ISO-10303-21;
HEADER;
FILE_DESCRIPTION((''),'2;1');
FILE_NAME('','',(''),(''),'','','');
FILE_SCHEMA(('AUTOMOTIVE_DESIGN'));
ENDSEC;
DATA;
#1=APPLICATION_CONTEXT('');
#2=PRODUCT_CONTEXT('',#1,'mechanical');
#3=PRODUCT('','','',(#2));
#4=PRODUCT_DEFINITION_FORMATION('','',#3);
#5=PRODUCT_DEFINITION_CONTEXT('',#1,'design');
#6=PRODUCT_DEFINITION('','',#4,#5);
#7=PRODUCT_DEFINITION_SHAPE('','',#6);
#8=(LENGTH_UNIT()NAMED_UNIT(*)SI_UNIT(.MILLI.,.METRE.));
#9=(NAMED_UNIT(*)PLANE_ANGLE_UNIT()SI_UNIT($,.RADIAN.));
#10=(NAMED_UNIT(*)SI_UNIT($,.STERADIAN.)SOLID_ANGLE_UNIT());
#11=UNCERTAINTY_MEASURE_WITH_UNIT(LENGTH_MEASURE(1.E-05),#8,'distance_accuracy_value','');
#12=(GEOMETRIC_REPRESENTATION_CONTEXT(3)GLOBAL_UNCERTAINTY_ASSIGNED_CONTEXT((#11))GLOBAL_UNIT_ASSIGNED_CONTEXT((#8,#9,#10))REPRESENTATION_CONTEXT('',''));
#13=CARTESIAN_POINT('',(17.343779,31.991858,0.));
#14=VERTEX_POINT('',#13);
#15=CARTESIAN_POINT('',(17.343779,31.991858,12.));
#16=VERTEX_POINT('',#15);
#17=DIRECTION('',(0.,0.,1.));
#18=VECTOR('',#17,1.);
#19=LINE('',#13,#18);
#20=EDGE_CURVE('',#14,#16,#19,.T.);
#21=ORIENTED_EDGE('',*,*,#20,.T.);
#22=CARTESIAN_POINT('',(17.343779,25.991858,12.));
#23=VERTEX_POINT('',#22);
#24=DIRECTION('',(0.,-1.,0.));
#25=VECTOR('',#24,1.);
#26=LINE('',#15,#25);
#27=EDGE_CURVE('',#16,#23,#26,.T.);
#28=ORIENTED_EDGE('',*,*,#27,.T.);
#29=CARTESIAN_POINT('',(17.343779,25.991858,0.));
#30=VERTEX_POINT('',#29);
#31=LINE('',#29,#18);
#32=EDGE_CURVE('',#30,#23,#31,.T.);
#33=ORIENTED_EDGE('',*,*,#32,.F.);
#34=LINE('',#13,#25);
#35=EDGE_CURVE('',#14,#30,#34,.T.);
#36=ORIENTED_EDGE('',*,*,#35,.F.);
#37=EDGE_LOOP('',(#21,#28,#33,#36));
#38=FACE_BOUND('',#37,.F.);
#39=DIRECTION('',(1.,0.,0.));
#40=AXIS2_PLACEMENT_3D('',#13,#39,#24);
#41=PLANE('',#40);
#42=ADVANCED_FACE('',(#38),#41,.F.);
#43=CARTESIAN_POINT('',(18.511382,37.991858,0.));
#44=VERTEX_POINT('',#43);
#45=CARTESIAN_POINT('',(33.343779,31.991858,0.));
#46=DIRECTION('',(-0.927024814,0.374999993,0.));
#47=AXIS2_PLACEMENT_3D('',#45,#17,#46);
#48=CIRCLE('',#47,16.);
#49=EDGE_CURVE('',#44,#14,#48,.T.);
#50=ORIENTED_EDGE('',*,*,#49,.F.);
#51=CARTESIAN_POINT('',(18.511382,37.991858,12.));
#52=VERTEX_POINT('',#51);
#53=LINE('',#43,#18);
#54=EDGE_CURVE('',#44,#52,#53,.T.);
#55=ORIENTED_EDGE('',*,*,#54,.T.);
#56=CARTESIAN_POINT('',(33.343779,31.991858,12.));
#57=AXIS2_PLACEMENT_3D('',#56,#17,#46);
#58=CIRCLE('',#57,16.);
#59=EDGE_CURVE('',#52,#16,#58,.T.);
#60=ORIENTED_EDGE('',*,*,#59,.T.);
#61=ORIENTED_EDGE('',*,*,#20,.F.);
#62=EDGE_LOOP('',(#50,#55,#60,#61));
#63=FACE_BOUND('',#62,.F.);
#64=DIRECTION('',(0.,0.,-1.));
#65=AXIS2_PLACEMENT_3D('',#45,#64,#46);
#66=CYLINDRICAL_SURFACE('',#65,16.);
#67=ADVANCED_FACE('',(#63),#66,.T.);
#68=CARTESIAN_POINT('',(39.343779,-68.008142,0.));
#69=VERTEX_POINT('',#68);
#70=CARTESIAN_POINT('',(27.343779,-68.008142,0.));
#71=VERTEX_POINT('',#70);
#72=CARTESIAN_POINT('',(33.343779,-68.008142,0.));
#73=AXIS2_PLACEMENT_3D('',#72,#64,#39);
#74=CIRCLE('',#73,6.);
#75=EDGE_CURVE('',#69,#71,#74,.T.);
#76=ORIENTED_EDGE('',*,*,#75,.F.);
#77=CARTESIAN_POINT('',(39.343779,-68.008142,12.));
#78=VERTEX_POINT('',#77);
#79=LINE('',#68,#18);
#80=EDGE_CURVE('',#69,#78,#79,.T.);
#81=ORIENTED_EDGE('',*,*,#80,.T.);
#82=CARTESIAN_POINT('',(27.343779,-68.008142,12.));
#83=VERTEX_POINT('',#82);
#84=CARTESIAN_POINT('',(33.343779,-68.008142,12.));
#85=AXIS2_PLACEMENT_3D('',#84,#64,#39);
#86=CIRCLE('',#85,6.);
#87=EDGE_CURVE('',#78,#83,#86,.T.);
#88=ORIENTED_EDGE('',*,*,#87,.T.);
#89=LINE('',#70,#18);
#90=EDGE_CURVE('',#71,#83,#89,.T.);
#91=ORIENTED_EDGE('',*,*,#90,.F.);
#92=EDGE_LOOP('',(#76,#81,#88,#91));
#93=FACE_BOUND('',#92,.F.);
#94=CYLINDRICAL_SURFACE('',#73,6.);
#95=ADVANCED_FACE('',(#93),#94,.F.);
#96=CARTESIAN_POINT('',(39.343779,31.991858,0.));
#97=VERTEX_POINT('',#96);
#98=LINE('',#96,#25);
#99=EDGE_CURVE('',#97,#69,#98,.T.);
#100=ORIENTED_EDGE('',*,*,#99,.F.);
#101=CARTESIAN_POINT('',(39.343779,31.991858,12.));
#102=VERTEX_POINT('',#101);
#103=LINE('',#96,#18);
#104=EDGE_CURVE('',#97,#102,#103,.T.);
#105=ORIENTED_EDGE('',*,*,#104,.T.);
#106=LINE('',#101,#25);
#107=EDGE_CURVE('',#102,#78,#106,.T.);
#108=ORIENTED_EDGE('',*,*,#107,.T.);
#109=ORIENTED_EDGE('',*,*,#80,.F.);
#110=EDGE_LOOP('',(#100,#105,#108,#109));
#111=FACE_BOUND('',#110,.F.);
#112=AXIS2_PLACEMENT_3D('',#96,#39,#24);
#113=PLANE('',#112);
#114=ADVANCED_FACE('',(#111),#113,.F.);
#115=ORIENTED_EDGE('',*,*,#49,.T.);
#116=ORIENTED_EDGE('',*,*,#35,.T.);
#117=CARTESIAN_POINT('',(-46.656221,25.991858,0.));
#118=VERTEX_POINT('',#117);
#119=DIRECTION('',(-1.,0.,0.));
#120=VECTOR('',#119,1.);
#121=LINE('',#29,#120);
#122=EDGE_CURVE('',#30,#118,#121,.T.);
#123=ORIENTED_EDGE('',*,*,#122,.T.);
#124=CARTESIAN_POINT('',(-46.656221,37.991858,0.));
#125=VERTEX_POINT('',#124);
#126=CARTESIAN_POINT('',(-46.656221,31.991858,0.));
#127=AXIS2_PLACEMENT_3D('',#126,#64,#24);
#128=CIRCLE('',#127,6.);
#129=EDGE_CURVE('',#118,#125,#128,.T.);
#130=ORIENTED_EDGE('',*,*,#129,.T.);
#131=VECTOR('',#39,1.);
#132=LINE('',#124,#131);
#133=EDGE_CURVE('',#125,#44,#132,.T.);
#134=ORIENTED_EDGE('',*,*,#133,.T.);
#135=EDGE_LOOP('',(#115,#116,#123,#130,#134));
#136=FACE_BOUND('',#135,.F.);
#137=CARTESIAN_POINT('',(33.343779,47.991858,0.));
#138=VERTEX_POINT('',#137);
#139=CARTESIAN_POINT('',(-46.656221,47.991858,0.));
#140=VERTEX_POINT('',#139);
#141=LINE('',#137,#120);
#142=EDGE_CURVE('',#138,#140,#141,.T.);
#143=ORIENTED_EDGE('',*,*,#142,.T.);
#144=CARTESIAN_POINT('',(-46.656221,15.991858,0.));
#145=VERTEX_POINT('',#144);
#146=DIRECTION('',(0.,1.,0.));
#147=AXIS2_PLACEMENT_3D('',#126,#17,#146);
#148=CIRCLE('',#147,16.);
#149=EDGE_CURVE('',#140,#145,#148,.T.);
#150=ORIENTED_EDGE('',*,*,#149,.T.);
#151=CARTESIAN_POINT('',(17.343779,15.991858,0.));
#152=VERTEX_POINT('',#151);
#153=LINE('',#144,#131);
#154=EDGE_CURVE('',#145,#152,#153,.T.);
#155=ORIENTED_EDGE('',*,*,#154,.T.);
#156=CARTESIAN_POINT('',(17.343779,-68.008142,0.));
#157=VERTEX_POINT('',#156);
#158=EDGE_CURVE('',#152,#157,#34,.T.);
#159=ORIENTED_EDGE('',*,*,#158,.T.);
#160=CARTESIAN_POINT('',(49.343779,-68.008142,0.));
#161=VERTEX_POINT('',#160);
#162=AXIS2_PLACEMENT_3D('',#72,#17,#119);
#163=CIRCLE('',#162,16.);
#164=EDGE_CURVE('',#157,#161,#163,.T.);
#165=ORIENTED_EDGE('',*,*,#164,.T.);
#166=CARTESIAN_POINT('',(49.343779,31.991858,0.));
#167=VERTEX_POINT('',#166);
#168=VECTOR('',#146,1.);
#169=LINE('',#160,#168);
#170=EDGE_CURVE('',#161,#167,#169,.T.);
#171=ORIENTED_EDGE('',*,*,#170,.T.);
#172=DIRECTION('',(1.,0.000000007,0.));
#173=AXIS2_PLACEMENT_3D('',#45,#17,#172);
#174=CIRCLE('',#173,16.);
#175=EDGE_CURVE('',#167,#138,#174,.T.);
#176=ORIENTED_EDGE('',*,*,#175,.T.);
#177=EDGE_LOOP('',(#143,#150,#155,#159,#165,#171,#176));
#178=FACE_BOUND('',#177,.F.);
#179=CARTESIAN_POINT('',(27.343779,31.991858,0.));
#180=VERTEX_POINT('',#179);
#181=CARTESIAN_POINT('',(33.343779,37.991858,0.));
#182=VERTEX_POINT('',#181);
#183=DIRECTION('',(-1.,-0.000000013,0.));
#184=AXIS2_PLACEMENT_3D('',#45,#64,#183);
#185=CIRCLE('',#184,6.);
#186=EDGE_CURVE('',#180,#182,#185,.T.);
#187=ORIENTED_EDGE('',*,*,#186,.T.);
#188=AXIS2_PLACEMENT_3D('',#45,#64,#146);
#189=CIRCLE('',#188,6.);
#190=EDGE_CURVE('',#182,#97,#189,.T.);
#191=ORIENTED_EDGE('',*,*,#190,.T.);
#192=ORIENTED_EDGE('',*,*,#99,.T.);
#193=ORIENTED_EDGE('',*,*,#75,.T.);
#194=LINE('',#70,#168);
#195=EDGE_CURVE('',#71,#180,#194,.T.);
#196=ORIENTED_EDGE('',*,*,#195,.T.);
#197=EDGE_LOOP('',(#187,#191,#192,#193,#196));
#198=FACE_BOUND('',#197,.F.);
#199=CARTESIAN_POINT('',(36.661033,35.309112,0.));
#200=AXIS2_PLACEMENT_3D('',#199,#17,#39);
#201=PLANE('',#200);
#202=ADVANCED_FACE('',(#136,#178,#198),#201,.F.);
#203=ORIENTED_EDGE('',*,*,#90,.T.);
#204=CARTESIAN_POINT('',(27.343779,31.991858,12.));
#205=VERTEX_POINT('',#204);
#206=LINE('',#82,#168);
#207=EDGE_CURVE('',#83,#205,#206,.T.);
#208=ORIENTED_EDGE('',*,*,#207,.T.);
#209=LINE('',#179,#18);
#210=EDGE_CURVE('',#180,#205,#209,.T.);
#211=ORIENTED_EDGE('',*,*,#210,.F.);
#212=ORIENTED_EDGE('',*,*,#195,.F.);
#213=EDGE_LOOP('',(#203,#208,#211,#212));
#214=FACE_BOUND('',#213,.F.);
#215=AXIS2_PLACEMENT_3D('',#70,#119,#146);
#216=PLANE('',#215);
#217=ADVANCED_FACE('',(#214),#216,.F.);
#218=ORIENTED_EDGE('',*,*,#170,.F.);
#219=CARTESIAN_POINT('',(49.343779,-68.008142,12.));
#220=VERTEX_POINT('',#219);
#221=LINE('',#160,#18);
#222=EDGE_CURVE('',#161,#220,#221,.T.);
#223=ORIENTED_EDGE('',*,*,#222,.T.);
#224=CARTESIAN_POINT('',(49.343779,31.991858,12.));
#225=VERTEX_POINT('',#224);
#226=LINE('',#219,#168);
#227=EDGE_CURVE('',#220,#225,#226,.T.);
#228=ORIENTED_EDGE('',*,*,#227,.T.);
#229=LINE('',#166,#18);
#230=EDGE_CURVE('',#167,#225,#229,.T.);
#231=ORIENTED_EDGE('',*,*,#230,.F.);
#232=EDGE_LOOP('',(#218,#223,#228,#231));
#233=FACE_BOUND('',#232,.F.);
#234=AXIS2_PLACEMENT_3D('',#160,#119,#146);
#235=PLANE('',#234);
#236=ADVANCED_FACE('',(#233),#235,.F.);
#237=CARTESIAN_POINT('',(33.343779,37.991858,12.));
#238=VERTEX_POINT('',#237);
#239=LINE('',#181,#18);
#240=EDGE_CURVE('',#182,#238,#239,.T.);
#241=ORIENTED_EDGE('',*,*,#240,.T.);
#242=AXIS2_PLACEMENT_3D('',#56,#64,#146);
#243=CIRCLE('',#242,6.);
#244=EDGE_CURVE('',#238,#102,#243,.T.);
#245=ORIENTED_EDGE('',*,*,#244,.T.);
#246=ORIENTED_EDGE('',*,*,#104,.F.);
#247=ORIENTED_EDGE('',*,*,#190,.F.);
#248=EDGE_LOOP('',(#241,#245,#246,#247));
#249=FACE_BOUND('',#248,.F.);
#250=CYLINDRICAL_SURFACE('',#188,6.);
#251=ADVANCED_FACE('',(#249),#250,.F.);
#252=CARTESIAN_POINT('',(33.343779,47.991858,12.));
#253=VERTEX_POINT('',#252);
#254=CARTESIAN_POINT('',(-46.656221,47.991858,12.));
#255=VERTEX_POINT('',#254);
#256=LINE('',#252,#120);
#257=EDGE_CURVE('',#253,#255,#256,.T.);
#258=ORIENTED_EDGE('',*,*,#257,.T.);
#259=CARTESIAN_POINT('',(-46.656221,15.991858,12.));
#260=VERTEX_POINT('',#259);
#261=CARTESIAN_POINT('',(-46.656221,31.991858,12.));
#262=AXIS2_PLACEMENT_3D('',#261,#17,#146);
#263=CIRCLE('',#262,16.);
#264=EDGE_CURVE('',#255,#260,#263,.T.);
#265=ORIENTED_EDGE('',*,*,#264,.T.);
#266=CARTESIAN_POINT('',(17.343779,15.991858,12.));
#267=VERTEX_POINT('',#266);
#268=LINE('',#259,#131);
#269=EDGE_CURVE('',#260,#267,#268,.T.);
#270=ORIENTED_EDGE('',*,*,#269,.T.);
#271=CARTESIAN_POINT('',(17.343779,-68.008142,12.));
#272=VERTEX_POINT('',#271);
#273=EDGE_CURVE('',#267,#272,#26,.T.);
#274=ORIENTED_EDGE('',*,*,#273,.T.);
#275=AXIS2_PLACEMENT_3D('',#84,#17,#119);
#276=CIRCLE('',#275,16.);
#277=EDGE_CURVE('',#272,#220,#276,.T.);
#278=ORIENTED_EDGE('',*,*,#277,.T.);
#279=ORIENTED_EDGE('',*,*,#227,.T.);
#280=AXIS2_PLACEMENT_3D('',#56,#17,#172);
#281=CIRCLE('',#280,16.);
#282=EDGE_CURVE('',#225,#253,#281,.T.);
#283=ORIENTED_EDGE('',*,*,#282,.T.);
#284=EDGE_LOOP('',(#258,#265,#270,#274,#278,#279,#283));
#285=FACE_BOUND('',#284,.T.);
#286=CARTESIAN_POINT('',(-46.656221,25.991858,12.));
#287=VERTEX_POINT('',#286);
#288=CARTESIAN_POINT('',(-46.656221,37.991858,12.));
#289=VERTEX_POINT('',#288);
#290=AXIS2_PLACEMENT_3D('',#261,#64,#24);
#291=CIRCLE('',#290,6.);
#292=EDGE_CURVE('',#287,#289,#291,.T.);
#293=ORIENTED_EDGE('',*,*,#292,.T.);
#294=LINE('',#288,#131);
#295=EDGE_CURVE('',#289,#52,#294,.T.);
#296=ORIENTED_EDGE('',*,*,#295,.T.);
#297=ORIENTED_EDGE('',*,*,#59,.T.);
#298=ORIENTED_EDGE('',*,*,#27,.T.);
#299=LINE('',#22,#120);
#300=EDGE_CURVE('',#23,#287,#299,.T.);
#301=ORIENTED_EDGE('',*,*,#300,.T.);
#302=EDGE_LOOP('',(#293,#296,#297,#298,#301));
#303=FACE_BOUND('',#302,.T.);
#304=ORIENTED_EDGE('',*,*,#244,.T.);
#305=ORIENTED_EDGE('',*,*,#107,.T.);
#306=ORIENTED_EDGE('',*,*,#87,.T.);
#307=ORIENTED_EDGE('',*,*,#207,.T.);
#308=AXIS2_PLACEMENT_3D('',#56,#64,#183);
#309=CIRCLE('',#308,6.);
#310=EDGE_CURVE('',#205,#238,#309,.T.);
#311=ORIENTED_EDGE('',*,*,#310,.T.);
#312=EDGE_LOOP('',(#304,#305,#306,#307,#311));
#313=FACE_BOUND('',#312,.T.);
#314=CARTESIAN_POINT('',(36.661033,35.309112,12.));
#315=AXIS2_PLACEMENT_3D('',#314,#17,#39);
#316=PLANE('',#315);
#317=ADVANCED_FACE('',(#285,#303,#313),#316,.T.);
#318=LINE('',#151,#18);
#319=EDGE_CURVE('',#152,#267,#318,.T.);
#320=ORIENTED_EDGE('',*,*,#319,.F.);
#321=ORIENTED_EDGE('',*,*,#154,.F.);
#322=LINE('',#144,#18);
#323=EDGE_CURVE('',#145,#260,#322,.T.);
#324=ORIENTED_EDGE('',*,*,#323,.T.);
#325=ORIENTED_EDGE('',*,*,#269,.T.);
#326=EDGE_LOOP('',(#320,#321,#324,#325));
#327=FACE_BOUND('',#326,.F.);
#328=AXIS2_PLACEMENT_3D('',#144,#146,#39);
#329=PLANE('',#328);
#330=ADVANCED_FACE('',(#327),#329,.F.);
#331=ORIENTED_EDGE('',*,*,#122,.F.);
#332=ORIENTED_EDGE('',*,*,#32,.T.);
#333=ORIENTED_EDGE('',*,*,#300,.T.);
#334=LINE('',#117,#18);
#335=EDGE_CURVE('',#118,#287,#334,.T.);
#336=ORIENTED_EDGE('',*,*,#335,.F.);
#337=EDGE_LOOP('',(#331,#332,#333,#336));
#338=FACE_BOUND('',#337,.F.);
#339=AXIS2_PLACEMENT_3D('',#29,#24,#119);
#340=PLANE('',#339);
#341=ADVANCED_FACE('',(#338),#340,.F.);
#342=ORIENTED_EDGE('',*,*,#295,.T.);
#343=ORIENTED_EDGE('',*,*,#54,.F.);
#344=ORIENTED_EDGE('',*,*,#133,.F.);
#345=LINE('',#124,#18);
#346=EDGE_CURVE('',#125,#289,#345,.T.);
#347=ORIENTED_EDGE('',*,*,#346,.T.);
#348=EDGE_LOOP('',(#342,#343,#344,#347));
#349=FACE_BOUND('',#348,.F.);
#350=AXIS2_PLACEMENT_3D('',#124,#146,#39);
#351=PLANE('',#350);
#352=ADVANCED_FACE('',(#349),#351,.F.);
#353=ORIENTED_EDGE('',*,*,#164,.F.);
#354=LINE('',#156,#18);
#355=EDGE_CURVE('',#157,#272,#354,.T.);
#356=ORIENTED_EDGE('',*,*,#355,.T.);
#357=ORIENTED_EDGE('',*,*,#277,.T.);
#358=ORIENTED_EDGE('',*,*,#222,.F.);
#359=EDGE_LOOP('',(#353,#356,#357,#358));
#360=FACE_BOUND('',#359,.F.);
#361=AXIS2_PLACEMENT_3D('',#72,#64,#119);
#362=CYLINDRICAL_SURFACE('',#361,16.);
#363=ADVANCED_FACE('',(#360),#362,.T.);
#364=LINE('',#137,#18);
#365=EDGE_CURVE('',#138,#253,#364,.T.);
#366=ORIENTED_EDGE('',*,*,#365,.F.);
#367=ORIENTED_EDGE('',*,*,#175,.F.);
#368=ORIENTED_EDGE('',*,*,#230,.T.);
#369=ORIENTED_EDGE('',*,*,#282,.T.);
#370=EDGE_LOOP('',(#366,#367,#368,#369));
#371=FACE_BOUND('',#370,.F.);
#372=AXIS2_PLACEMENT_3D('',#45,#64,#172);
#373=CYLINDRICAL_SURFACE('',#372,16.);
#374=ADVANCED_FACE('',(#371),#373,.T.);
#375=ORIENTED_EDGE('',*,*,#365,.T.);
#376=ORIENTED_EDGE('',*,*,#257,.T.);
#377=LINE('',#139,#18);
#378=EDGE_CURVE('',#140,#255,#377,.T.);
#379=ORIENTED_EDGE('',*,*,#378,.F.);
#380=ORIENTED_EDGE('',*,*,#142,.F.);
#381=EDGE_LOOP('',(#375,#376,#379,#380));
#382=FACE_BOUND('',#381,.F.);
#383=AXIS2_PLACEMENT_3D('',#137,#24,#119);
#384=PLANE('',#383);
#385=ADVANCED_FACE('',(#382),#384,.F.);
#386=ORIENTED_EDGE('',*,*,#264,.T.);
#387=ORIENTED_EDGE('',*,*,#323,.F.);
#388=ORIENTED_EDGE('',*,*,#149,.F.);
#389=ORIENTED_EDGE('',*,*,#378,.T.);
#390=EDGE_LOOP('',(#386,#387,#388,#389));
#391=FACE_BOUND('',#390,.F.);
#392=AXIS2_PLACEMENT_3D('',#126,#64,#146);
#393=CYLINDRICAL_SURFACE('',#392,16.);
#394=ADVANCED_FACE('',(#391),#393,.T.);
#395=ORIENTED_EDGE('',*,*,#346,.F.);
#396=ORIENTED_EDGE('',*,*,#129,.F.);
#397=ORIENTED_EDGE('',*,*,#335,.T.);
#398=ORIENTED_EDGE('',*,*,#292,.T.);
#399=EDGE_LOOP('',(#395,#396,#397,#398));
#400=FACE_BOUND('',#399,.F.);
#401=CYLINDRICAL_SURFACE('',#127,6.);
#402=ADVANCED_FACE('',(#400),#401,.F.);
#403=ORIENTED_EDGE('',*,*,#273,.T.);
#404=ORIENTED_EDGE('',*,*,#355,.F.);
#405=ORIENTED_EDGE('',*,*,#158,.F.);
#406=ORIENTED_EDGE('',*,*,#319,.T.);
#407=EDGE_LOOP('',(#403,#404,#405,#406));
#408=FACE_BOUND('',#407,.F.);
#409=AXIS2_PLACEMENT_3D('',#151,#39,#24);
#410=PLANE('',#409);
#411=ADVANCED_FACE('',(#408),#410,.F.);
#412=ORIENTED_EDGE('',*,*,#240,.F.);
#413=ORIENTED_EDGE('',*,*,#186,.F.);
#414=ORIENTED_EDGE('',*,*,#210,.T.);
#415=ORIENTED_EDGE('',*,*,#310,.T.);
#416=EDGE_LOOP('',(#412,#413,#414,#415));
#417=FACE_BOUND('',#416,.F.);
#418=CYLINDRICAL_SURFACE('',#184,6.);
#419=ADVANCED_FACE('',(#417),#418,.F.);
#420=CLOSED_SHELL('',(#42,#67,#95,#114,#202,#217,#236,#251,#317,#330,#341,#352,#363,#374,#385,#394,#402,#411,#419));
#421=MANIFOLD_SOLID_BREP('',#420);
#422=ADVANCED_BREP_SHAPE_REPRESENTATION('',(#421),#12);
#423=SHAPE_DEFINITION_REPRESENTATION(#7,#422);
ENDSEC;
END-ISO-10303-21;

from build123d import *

# Parameters (mm, degrees)
F0_W     = 10
F0_H     = 10
F1_DEPTH = 12


# Not quite as in the source:
# - ends of sketch curves that miss each other by under 0.0002 mm in the source are joined


with BuildPart() as f1:
    # F0 (on Top) → F1 (new body)
    with BuildSketch(Plane.XY):
        with BuildLine():
            ThreePointArc((49.3437788486, 31.9918581452), (44.6574873088, 43.3055665732), (33.3437788486, 47.9918580353))
            ThreePointArc((33.3437788486, 47.9918580353), (24.3995068895, 45.2583572735), (18.51138183, 37.9918580353))
            Line((18.51138183, 37.9918580353), (33.3437788486, 37.9918580353))
            ThreePointArc((33.3437788486, 37.9918580353), (37.5864194969, 36.2344987613), (39.3437788486, 31.9918581452))
            Line((39.3437788486, 31.9918581452), (39.3437788486, 17.1594610611))
            ThreePointArc((39.3437788486, 17.1594610611), (46.6102780408, 23.0475861709), (49.3437788486, 31.9918581452))
        make_face()
        with BuildLine():
            Line((49.3437788486, -68.0081418548), (49.3437788486, 31.9918581452))
            ThreePointArc((49.3437788486, 31.9918581452), (46.6102780408, 23.0475861709), (39.3437788486, 17.1594610611))
            Line((39.3437788486, 17.1594610611), (39.3437788486, -68.0081418548))
            ThreePointArc((39.3437788486, -68.0081418548), (33.3437788486, -74.0081418548), (27.3437788486, -68.0081418548))
            Line((27.3437788486, -68.0081418548), (27.3437788486, 15.9918580353))
            Line((27.3437788486, 15.9918580353), (17.3437788486, 15.9918580353))
            Line((17.3437788486, 15.9918580353), (17.3437788486, -68.0081418548))
            ThreePointArc((17.3437788486, -68.0081418548), (33.3437788486, -84.0081418548), (49.3437788486, -68.0081418548))
        make_face()
        with BuildLine():
            Line((33.3437788486, 37.9918580353), (18.51138183, 37.9918580353))
            ThreePointArc((18.51138183, 37.9918580353), (17.6383919973, 35.0481342863), (17.3437788486, 31.9918581452))
            Line((17.3437788486, 31.9918581452), (17.3437788486, 25.9918580353))
            Line((17.3437788486, 25.9918580353), (27.3437788486, 25.9918580353))
            Line((27.3437788486, 25.9918580353), (27.3437788486, 31.9918581452))
            ThreePointArc((27.3437788486, 31.9918581452), (29.1011381615, 36.2344988323), (33.3437788486, 37.9918580353))
        make_face()
        with Locations((22.3437788486, 20.9918580353)):
            Rectangle(F0_W, F0_H)
        with BuildLine():
            Line((33.3437788486, 47.9918580353), (-46.6562211514, 47.9918580353))
            ThreePointArc((-46.6562211514, 47.9918580353), (-62.6562211514, 31.9918580353), (-46.6562211514, 15.9918580353))
            Line((-46.6562211514, 15.9918580353), (17.3437788486, 15.9918580353))
            Line((17.3437788486, 15.9918580353), (17.3437788486, 25.9918580353))
            Line((17.3437788486, 25.9918580353), (-46.6562211514, 25.9918580353))
            ThreePointArc((-46.6562211514, 25.9918580353), (-52.6562211514, 31.9918580353), (-46.6562211514, 37.9918580353))
            Line((-46.6562211514, 37.9918580353), (18.51138183, 37.9918580353))
            ThreePointArc((18.51138183, 37.9918580353), (24.3995068895, 45.2583572735), (33.3437788486, 47.9918580353))
        make_face()
    extrude(amount=F1_DEPTH)


solid = f1.part
